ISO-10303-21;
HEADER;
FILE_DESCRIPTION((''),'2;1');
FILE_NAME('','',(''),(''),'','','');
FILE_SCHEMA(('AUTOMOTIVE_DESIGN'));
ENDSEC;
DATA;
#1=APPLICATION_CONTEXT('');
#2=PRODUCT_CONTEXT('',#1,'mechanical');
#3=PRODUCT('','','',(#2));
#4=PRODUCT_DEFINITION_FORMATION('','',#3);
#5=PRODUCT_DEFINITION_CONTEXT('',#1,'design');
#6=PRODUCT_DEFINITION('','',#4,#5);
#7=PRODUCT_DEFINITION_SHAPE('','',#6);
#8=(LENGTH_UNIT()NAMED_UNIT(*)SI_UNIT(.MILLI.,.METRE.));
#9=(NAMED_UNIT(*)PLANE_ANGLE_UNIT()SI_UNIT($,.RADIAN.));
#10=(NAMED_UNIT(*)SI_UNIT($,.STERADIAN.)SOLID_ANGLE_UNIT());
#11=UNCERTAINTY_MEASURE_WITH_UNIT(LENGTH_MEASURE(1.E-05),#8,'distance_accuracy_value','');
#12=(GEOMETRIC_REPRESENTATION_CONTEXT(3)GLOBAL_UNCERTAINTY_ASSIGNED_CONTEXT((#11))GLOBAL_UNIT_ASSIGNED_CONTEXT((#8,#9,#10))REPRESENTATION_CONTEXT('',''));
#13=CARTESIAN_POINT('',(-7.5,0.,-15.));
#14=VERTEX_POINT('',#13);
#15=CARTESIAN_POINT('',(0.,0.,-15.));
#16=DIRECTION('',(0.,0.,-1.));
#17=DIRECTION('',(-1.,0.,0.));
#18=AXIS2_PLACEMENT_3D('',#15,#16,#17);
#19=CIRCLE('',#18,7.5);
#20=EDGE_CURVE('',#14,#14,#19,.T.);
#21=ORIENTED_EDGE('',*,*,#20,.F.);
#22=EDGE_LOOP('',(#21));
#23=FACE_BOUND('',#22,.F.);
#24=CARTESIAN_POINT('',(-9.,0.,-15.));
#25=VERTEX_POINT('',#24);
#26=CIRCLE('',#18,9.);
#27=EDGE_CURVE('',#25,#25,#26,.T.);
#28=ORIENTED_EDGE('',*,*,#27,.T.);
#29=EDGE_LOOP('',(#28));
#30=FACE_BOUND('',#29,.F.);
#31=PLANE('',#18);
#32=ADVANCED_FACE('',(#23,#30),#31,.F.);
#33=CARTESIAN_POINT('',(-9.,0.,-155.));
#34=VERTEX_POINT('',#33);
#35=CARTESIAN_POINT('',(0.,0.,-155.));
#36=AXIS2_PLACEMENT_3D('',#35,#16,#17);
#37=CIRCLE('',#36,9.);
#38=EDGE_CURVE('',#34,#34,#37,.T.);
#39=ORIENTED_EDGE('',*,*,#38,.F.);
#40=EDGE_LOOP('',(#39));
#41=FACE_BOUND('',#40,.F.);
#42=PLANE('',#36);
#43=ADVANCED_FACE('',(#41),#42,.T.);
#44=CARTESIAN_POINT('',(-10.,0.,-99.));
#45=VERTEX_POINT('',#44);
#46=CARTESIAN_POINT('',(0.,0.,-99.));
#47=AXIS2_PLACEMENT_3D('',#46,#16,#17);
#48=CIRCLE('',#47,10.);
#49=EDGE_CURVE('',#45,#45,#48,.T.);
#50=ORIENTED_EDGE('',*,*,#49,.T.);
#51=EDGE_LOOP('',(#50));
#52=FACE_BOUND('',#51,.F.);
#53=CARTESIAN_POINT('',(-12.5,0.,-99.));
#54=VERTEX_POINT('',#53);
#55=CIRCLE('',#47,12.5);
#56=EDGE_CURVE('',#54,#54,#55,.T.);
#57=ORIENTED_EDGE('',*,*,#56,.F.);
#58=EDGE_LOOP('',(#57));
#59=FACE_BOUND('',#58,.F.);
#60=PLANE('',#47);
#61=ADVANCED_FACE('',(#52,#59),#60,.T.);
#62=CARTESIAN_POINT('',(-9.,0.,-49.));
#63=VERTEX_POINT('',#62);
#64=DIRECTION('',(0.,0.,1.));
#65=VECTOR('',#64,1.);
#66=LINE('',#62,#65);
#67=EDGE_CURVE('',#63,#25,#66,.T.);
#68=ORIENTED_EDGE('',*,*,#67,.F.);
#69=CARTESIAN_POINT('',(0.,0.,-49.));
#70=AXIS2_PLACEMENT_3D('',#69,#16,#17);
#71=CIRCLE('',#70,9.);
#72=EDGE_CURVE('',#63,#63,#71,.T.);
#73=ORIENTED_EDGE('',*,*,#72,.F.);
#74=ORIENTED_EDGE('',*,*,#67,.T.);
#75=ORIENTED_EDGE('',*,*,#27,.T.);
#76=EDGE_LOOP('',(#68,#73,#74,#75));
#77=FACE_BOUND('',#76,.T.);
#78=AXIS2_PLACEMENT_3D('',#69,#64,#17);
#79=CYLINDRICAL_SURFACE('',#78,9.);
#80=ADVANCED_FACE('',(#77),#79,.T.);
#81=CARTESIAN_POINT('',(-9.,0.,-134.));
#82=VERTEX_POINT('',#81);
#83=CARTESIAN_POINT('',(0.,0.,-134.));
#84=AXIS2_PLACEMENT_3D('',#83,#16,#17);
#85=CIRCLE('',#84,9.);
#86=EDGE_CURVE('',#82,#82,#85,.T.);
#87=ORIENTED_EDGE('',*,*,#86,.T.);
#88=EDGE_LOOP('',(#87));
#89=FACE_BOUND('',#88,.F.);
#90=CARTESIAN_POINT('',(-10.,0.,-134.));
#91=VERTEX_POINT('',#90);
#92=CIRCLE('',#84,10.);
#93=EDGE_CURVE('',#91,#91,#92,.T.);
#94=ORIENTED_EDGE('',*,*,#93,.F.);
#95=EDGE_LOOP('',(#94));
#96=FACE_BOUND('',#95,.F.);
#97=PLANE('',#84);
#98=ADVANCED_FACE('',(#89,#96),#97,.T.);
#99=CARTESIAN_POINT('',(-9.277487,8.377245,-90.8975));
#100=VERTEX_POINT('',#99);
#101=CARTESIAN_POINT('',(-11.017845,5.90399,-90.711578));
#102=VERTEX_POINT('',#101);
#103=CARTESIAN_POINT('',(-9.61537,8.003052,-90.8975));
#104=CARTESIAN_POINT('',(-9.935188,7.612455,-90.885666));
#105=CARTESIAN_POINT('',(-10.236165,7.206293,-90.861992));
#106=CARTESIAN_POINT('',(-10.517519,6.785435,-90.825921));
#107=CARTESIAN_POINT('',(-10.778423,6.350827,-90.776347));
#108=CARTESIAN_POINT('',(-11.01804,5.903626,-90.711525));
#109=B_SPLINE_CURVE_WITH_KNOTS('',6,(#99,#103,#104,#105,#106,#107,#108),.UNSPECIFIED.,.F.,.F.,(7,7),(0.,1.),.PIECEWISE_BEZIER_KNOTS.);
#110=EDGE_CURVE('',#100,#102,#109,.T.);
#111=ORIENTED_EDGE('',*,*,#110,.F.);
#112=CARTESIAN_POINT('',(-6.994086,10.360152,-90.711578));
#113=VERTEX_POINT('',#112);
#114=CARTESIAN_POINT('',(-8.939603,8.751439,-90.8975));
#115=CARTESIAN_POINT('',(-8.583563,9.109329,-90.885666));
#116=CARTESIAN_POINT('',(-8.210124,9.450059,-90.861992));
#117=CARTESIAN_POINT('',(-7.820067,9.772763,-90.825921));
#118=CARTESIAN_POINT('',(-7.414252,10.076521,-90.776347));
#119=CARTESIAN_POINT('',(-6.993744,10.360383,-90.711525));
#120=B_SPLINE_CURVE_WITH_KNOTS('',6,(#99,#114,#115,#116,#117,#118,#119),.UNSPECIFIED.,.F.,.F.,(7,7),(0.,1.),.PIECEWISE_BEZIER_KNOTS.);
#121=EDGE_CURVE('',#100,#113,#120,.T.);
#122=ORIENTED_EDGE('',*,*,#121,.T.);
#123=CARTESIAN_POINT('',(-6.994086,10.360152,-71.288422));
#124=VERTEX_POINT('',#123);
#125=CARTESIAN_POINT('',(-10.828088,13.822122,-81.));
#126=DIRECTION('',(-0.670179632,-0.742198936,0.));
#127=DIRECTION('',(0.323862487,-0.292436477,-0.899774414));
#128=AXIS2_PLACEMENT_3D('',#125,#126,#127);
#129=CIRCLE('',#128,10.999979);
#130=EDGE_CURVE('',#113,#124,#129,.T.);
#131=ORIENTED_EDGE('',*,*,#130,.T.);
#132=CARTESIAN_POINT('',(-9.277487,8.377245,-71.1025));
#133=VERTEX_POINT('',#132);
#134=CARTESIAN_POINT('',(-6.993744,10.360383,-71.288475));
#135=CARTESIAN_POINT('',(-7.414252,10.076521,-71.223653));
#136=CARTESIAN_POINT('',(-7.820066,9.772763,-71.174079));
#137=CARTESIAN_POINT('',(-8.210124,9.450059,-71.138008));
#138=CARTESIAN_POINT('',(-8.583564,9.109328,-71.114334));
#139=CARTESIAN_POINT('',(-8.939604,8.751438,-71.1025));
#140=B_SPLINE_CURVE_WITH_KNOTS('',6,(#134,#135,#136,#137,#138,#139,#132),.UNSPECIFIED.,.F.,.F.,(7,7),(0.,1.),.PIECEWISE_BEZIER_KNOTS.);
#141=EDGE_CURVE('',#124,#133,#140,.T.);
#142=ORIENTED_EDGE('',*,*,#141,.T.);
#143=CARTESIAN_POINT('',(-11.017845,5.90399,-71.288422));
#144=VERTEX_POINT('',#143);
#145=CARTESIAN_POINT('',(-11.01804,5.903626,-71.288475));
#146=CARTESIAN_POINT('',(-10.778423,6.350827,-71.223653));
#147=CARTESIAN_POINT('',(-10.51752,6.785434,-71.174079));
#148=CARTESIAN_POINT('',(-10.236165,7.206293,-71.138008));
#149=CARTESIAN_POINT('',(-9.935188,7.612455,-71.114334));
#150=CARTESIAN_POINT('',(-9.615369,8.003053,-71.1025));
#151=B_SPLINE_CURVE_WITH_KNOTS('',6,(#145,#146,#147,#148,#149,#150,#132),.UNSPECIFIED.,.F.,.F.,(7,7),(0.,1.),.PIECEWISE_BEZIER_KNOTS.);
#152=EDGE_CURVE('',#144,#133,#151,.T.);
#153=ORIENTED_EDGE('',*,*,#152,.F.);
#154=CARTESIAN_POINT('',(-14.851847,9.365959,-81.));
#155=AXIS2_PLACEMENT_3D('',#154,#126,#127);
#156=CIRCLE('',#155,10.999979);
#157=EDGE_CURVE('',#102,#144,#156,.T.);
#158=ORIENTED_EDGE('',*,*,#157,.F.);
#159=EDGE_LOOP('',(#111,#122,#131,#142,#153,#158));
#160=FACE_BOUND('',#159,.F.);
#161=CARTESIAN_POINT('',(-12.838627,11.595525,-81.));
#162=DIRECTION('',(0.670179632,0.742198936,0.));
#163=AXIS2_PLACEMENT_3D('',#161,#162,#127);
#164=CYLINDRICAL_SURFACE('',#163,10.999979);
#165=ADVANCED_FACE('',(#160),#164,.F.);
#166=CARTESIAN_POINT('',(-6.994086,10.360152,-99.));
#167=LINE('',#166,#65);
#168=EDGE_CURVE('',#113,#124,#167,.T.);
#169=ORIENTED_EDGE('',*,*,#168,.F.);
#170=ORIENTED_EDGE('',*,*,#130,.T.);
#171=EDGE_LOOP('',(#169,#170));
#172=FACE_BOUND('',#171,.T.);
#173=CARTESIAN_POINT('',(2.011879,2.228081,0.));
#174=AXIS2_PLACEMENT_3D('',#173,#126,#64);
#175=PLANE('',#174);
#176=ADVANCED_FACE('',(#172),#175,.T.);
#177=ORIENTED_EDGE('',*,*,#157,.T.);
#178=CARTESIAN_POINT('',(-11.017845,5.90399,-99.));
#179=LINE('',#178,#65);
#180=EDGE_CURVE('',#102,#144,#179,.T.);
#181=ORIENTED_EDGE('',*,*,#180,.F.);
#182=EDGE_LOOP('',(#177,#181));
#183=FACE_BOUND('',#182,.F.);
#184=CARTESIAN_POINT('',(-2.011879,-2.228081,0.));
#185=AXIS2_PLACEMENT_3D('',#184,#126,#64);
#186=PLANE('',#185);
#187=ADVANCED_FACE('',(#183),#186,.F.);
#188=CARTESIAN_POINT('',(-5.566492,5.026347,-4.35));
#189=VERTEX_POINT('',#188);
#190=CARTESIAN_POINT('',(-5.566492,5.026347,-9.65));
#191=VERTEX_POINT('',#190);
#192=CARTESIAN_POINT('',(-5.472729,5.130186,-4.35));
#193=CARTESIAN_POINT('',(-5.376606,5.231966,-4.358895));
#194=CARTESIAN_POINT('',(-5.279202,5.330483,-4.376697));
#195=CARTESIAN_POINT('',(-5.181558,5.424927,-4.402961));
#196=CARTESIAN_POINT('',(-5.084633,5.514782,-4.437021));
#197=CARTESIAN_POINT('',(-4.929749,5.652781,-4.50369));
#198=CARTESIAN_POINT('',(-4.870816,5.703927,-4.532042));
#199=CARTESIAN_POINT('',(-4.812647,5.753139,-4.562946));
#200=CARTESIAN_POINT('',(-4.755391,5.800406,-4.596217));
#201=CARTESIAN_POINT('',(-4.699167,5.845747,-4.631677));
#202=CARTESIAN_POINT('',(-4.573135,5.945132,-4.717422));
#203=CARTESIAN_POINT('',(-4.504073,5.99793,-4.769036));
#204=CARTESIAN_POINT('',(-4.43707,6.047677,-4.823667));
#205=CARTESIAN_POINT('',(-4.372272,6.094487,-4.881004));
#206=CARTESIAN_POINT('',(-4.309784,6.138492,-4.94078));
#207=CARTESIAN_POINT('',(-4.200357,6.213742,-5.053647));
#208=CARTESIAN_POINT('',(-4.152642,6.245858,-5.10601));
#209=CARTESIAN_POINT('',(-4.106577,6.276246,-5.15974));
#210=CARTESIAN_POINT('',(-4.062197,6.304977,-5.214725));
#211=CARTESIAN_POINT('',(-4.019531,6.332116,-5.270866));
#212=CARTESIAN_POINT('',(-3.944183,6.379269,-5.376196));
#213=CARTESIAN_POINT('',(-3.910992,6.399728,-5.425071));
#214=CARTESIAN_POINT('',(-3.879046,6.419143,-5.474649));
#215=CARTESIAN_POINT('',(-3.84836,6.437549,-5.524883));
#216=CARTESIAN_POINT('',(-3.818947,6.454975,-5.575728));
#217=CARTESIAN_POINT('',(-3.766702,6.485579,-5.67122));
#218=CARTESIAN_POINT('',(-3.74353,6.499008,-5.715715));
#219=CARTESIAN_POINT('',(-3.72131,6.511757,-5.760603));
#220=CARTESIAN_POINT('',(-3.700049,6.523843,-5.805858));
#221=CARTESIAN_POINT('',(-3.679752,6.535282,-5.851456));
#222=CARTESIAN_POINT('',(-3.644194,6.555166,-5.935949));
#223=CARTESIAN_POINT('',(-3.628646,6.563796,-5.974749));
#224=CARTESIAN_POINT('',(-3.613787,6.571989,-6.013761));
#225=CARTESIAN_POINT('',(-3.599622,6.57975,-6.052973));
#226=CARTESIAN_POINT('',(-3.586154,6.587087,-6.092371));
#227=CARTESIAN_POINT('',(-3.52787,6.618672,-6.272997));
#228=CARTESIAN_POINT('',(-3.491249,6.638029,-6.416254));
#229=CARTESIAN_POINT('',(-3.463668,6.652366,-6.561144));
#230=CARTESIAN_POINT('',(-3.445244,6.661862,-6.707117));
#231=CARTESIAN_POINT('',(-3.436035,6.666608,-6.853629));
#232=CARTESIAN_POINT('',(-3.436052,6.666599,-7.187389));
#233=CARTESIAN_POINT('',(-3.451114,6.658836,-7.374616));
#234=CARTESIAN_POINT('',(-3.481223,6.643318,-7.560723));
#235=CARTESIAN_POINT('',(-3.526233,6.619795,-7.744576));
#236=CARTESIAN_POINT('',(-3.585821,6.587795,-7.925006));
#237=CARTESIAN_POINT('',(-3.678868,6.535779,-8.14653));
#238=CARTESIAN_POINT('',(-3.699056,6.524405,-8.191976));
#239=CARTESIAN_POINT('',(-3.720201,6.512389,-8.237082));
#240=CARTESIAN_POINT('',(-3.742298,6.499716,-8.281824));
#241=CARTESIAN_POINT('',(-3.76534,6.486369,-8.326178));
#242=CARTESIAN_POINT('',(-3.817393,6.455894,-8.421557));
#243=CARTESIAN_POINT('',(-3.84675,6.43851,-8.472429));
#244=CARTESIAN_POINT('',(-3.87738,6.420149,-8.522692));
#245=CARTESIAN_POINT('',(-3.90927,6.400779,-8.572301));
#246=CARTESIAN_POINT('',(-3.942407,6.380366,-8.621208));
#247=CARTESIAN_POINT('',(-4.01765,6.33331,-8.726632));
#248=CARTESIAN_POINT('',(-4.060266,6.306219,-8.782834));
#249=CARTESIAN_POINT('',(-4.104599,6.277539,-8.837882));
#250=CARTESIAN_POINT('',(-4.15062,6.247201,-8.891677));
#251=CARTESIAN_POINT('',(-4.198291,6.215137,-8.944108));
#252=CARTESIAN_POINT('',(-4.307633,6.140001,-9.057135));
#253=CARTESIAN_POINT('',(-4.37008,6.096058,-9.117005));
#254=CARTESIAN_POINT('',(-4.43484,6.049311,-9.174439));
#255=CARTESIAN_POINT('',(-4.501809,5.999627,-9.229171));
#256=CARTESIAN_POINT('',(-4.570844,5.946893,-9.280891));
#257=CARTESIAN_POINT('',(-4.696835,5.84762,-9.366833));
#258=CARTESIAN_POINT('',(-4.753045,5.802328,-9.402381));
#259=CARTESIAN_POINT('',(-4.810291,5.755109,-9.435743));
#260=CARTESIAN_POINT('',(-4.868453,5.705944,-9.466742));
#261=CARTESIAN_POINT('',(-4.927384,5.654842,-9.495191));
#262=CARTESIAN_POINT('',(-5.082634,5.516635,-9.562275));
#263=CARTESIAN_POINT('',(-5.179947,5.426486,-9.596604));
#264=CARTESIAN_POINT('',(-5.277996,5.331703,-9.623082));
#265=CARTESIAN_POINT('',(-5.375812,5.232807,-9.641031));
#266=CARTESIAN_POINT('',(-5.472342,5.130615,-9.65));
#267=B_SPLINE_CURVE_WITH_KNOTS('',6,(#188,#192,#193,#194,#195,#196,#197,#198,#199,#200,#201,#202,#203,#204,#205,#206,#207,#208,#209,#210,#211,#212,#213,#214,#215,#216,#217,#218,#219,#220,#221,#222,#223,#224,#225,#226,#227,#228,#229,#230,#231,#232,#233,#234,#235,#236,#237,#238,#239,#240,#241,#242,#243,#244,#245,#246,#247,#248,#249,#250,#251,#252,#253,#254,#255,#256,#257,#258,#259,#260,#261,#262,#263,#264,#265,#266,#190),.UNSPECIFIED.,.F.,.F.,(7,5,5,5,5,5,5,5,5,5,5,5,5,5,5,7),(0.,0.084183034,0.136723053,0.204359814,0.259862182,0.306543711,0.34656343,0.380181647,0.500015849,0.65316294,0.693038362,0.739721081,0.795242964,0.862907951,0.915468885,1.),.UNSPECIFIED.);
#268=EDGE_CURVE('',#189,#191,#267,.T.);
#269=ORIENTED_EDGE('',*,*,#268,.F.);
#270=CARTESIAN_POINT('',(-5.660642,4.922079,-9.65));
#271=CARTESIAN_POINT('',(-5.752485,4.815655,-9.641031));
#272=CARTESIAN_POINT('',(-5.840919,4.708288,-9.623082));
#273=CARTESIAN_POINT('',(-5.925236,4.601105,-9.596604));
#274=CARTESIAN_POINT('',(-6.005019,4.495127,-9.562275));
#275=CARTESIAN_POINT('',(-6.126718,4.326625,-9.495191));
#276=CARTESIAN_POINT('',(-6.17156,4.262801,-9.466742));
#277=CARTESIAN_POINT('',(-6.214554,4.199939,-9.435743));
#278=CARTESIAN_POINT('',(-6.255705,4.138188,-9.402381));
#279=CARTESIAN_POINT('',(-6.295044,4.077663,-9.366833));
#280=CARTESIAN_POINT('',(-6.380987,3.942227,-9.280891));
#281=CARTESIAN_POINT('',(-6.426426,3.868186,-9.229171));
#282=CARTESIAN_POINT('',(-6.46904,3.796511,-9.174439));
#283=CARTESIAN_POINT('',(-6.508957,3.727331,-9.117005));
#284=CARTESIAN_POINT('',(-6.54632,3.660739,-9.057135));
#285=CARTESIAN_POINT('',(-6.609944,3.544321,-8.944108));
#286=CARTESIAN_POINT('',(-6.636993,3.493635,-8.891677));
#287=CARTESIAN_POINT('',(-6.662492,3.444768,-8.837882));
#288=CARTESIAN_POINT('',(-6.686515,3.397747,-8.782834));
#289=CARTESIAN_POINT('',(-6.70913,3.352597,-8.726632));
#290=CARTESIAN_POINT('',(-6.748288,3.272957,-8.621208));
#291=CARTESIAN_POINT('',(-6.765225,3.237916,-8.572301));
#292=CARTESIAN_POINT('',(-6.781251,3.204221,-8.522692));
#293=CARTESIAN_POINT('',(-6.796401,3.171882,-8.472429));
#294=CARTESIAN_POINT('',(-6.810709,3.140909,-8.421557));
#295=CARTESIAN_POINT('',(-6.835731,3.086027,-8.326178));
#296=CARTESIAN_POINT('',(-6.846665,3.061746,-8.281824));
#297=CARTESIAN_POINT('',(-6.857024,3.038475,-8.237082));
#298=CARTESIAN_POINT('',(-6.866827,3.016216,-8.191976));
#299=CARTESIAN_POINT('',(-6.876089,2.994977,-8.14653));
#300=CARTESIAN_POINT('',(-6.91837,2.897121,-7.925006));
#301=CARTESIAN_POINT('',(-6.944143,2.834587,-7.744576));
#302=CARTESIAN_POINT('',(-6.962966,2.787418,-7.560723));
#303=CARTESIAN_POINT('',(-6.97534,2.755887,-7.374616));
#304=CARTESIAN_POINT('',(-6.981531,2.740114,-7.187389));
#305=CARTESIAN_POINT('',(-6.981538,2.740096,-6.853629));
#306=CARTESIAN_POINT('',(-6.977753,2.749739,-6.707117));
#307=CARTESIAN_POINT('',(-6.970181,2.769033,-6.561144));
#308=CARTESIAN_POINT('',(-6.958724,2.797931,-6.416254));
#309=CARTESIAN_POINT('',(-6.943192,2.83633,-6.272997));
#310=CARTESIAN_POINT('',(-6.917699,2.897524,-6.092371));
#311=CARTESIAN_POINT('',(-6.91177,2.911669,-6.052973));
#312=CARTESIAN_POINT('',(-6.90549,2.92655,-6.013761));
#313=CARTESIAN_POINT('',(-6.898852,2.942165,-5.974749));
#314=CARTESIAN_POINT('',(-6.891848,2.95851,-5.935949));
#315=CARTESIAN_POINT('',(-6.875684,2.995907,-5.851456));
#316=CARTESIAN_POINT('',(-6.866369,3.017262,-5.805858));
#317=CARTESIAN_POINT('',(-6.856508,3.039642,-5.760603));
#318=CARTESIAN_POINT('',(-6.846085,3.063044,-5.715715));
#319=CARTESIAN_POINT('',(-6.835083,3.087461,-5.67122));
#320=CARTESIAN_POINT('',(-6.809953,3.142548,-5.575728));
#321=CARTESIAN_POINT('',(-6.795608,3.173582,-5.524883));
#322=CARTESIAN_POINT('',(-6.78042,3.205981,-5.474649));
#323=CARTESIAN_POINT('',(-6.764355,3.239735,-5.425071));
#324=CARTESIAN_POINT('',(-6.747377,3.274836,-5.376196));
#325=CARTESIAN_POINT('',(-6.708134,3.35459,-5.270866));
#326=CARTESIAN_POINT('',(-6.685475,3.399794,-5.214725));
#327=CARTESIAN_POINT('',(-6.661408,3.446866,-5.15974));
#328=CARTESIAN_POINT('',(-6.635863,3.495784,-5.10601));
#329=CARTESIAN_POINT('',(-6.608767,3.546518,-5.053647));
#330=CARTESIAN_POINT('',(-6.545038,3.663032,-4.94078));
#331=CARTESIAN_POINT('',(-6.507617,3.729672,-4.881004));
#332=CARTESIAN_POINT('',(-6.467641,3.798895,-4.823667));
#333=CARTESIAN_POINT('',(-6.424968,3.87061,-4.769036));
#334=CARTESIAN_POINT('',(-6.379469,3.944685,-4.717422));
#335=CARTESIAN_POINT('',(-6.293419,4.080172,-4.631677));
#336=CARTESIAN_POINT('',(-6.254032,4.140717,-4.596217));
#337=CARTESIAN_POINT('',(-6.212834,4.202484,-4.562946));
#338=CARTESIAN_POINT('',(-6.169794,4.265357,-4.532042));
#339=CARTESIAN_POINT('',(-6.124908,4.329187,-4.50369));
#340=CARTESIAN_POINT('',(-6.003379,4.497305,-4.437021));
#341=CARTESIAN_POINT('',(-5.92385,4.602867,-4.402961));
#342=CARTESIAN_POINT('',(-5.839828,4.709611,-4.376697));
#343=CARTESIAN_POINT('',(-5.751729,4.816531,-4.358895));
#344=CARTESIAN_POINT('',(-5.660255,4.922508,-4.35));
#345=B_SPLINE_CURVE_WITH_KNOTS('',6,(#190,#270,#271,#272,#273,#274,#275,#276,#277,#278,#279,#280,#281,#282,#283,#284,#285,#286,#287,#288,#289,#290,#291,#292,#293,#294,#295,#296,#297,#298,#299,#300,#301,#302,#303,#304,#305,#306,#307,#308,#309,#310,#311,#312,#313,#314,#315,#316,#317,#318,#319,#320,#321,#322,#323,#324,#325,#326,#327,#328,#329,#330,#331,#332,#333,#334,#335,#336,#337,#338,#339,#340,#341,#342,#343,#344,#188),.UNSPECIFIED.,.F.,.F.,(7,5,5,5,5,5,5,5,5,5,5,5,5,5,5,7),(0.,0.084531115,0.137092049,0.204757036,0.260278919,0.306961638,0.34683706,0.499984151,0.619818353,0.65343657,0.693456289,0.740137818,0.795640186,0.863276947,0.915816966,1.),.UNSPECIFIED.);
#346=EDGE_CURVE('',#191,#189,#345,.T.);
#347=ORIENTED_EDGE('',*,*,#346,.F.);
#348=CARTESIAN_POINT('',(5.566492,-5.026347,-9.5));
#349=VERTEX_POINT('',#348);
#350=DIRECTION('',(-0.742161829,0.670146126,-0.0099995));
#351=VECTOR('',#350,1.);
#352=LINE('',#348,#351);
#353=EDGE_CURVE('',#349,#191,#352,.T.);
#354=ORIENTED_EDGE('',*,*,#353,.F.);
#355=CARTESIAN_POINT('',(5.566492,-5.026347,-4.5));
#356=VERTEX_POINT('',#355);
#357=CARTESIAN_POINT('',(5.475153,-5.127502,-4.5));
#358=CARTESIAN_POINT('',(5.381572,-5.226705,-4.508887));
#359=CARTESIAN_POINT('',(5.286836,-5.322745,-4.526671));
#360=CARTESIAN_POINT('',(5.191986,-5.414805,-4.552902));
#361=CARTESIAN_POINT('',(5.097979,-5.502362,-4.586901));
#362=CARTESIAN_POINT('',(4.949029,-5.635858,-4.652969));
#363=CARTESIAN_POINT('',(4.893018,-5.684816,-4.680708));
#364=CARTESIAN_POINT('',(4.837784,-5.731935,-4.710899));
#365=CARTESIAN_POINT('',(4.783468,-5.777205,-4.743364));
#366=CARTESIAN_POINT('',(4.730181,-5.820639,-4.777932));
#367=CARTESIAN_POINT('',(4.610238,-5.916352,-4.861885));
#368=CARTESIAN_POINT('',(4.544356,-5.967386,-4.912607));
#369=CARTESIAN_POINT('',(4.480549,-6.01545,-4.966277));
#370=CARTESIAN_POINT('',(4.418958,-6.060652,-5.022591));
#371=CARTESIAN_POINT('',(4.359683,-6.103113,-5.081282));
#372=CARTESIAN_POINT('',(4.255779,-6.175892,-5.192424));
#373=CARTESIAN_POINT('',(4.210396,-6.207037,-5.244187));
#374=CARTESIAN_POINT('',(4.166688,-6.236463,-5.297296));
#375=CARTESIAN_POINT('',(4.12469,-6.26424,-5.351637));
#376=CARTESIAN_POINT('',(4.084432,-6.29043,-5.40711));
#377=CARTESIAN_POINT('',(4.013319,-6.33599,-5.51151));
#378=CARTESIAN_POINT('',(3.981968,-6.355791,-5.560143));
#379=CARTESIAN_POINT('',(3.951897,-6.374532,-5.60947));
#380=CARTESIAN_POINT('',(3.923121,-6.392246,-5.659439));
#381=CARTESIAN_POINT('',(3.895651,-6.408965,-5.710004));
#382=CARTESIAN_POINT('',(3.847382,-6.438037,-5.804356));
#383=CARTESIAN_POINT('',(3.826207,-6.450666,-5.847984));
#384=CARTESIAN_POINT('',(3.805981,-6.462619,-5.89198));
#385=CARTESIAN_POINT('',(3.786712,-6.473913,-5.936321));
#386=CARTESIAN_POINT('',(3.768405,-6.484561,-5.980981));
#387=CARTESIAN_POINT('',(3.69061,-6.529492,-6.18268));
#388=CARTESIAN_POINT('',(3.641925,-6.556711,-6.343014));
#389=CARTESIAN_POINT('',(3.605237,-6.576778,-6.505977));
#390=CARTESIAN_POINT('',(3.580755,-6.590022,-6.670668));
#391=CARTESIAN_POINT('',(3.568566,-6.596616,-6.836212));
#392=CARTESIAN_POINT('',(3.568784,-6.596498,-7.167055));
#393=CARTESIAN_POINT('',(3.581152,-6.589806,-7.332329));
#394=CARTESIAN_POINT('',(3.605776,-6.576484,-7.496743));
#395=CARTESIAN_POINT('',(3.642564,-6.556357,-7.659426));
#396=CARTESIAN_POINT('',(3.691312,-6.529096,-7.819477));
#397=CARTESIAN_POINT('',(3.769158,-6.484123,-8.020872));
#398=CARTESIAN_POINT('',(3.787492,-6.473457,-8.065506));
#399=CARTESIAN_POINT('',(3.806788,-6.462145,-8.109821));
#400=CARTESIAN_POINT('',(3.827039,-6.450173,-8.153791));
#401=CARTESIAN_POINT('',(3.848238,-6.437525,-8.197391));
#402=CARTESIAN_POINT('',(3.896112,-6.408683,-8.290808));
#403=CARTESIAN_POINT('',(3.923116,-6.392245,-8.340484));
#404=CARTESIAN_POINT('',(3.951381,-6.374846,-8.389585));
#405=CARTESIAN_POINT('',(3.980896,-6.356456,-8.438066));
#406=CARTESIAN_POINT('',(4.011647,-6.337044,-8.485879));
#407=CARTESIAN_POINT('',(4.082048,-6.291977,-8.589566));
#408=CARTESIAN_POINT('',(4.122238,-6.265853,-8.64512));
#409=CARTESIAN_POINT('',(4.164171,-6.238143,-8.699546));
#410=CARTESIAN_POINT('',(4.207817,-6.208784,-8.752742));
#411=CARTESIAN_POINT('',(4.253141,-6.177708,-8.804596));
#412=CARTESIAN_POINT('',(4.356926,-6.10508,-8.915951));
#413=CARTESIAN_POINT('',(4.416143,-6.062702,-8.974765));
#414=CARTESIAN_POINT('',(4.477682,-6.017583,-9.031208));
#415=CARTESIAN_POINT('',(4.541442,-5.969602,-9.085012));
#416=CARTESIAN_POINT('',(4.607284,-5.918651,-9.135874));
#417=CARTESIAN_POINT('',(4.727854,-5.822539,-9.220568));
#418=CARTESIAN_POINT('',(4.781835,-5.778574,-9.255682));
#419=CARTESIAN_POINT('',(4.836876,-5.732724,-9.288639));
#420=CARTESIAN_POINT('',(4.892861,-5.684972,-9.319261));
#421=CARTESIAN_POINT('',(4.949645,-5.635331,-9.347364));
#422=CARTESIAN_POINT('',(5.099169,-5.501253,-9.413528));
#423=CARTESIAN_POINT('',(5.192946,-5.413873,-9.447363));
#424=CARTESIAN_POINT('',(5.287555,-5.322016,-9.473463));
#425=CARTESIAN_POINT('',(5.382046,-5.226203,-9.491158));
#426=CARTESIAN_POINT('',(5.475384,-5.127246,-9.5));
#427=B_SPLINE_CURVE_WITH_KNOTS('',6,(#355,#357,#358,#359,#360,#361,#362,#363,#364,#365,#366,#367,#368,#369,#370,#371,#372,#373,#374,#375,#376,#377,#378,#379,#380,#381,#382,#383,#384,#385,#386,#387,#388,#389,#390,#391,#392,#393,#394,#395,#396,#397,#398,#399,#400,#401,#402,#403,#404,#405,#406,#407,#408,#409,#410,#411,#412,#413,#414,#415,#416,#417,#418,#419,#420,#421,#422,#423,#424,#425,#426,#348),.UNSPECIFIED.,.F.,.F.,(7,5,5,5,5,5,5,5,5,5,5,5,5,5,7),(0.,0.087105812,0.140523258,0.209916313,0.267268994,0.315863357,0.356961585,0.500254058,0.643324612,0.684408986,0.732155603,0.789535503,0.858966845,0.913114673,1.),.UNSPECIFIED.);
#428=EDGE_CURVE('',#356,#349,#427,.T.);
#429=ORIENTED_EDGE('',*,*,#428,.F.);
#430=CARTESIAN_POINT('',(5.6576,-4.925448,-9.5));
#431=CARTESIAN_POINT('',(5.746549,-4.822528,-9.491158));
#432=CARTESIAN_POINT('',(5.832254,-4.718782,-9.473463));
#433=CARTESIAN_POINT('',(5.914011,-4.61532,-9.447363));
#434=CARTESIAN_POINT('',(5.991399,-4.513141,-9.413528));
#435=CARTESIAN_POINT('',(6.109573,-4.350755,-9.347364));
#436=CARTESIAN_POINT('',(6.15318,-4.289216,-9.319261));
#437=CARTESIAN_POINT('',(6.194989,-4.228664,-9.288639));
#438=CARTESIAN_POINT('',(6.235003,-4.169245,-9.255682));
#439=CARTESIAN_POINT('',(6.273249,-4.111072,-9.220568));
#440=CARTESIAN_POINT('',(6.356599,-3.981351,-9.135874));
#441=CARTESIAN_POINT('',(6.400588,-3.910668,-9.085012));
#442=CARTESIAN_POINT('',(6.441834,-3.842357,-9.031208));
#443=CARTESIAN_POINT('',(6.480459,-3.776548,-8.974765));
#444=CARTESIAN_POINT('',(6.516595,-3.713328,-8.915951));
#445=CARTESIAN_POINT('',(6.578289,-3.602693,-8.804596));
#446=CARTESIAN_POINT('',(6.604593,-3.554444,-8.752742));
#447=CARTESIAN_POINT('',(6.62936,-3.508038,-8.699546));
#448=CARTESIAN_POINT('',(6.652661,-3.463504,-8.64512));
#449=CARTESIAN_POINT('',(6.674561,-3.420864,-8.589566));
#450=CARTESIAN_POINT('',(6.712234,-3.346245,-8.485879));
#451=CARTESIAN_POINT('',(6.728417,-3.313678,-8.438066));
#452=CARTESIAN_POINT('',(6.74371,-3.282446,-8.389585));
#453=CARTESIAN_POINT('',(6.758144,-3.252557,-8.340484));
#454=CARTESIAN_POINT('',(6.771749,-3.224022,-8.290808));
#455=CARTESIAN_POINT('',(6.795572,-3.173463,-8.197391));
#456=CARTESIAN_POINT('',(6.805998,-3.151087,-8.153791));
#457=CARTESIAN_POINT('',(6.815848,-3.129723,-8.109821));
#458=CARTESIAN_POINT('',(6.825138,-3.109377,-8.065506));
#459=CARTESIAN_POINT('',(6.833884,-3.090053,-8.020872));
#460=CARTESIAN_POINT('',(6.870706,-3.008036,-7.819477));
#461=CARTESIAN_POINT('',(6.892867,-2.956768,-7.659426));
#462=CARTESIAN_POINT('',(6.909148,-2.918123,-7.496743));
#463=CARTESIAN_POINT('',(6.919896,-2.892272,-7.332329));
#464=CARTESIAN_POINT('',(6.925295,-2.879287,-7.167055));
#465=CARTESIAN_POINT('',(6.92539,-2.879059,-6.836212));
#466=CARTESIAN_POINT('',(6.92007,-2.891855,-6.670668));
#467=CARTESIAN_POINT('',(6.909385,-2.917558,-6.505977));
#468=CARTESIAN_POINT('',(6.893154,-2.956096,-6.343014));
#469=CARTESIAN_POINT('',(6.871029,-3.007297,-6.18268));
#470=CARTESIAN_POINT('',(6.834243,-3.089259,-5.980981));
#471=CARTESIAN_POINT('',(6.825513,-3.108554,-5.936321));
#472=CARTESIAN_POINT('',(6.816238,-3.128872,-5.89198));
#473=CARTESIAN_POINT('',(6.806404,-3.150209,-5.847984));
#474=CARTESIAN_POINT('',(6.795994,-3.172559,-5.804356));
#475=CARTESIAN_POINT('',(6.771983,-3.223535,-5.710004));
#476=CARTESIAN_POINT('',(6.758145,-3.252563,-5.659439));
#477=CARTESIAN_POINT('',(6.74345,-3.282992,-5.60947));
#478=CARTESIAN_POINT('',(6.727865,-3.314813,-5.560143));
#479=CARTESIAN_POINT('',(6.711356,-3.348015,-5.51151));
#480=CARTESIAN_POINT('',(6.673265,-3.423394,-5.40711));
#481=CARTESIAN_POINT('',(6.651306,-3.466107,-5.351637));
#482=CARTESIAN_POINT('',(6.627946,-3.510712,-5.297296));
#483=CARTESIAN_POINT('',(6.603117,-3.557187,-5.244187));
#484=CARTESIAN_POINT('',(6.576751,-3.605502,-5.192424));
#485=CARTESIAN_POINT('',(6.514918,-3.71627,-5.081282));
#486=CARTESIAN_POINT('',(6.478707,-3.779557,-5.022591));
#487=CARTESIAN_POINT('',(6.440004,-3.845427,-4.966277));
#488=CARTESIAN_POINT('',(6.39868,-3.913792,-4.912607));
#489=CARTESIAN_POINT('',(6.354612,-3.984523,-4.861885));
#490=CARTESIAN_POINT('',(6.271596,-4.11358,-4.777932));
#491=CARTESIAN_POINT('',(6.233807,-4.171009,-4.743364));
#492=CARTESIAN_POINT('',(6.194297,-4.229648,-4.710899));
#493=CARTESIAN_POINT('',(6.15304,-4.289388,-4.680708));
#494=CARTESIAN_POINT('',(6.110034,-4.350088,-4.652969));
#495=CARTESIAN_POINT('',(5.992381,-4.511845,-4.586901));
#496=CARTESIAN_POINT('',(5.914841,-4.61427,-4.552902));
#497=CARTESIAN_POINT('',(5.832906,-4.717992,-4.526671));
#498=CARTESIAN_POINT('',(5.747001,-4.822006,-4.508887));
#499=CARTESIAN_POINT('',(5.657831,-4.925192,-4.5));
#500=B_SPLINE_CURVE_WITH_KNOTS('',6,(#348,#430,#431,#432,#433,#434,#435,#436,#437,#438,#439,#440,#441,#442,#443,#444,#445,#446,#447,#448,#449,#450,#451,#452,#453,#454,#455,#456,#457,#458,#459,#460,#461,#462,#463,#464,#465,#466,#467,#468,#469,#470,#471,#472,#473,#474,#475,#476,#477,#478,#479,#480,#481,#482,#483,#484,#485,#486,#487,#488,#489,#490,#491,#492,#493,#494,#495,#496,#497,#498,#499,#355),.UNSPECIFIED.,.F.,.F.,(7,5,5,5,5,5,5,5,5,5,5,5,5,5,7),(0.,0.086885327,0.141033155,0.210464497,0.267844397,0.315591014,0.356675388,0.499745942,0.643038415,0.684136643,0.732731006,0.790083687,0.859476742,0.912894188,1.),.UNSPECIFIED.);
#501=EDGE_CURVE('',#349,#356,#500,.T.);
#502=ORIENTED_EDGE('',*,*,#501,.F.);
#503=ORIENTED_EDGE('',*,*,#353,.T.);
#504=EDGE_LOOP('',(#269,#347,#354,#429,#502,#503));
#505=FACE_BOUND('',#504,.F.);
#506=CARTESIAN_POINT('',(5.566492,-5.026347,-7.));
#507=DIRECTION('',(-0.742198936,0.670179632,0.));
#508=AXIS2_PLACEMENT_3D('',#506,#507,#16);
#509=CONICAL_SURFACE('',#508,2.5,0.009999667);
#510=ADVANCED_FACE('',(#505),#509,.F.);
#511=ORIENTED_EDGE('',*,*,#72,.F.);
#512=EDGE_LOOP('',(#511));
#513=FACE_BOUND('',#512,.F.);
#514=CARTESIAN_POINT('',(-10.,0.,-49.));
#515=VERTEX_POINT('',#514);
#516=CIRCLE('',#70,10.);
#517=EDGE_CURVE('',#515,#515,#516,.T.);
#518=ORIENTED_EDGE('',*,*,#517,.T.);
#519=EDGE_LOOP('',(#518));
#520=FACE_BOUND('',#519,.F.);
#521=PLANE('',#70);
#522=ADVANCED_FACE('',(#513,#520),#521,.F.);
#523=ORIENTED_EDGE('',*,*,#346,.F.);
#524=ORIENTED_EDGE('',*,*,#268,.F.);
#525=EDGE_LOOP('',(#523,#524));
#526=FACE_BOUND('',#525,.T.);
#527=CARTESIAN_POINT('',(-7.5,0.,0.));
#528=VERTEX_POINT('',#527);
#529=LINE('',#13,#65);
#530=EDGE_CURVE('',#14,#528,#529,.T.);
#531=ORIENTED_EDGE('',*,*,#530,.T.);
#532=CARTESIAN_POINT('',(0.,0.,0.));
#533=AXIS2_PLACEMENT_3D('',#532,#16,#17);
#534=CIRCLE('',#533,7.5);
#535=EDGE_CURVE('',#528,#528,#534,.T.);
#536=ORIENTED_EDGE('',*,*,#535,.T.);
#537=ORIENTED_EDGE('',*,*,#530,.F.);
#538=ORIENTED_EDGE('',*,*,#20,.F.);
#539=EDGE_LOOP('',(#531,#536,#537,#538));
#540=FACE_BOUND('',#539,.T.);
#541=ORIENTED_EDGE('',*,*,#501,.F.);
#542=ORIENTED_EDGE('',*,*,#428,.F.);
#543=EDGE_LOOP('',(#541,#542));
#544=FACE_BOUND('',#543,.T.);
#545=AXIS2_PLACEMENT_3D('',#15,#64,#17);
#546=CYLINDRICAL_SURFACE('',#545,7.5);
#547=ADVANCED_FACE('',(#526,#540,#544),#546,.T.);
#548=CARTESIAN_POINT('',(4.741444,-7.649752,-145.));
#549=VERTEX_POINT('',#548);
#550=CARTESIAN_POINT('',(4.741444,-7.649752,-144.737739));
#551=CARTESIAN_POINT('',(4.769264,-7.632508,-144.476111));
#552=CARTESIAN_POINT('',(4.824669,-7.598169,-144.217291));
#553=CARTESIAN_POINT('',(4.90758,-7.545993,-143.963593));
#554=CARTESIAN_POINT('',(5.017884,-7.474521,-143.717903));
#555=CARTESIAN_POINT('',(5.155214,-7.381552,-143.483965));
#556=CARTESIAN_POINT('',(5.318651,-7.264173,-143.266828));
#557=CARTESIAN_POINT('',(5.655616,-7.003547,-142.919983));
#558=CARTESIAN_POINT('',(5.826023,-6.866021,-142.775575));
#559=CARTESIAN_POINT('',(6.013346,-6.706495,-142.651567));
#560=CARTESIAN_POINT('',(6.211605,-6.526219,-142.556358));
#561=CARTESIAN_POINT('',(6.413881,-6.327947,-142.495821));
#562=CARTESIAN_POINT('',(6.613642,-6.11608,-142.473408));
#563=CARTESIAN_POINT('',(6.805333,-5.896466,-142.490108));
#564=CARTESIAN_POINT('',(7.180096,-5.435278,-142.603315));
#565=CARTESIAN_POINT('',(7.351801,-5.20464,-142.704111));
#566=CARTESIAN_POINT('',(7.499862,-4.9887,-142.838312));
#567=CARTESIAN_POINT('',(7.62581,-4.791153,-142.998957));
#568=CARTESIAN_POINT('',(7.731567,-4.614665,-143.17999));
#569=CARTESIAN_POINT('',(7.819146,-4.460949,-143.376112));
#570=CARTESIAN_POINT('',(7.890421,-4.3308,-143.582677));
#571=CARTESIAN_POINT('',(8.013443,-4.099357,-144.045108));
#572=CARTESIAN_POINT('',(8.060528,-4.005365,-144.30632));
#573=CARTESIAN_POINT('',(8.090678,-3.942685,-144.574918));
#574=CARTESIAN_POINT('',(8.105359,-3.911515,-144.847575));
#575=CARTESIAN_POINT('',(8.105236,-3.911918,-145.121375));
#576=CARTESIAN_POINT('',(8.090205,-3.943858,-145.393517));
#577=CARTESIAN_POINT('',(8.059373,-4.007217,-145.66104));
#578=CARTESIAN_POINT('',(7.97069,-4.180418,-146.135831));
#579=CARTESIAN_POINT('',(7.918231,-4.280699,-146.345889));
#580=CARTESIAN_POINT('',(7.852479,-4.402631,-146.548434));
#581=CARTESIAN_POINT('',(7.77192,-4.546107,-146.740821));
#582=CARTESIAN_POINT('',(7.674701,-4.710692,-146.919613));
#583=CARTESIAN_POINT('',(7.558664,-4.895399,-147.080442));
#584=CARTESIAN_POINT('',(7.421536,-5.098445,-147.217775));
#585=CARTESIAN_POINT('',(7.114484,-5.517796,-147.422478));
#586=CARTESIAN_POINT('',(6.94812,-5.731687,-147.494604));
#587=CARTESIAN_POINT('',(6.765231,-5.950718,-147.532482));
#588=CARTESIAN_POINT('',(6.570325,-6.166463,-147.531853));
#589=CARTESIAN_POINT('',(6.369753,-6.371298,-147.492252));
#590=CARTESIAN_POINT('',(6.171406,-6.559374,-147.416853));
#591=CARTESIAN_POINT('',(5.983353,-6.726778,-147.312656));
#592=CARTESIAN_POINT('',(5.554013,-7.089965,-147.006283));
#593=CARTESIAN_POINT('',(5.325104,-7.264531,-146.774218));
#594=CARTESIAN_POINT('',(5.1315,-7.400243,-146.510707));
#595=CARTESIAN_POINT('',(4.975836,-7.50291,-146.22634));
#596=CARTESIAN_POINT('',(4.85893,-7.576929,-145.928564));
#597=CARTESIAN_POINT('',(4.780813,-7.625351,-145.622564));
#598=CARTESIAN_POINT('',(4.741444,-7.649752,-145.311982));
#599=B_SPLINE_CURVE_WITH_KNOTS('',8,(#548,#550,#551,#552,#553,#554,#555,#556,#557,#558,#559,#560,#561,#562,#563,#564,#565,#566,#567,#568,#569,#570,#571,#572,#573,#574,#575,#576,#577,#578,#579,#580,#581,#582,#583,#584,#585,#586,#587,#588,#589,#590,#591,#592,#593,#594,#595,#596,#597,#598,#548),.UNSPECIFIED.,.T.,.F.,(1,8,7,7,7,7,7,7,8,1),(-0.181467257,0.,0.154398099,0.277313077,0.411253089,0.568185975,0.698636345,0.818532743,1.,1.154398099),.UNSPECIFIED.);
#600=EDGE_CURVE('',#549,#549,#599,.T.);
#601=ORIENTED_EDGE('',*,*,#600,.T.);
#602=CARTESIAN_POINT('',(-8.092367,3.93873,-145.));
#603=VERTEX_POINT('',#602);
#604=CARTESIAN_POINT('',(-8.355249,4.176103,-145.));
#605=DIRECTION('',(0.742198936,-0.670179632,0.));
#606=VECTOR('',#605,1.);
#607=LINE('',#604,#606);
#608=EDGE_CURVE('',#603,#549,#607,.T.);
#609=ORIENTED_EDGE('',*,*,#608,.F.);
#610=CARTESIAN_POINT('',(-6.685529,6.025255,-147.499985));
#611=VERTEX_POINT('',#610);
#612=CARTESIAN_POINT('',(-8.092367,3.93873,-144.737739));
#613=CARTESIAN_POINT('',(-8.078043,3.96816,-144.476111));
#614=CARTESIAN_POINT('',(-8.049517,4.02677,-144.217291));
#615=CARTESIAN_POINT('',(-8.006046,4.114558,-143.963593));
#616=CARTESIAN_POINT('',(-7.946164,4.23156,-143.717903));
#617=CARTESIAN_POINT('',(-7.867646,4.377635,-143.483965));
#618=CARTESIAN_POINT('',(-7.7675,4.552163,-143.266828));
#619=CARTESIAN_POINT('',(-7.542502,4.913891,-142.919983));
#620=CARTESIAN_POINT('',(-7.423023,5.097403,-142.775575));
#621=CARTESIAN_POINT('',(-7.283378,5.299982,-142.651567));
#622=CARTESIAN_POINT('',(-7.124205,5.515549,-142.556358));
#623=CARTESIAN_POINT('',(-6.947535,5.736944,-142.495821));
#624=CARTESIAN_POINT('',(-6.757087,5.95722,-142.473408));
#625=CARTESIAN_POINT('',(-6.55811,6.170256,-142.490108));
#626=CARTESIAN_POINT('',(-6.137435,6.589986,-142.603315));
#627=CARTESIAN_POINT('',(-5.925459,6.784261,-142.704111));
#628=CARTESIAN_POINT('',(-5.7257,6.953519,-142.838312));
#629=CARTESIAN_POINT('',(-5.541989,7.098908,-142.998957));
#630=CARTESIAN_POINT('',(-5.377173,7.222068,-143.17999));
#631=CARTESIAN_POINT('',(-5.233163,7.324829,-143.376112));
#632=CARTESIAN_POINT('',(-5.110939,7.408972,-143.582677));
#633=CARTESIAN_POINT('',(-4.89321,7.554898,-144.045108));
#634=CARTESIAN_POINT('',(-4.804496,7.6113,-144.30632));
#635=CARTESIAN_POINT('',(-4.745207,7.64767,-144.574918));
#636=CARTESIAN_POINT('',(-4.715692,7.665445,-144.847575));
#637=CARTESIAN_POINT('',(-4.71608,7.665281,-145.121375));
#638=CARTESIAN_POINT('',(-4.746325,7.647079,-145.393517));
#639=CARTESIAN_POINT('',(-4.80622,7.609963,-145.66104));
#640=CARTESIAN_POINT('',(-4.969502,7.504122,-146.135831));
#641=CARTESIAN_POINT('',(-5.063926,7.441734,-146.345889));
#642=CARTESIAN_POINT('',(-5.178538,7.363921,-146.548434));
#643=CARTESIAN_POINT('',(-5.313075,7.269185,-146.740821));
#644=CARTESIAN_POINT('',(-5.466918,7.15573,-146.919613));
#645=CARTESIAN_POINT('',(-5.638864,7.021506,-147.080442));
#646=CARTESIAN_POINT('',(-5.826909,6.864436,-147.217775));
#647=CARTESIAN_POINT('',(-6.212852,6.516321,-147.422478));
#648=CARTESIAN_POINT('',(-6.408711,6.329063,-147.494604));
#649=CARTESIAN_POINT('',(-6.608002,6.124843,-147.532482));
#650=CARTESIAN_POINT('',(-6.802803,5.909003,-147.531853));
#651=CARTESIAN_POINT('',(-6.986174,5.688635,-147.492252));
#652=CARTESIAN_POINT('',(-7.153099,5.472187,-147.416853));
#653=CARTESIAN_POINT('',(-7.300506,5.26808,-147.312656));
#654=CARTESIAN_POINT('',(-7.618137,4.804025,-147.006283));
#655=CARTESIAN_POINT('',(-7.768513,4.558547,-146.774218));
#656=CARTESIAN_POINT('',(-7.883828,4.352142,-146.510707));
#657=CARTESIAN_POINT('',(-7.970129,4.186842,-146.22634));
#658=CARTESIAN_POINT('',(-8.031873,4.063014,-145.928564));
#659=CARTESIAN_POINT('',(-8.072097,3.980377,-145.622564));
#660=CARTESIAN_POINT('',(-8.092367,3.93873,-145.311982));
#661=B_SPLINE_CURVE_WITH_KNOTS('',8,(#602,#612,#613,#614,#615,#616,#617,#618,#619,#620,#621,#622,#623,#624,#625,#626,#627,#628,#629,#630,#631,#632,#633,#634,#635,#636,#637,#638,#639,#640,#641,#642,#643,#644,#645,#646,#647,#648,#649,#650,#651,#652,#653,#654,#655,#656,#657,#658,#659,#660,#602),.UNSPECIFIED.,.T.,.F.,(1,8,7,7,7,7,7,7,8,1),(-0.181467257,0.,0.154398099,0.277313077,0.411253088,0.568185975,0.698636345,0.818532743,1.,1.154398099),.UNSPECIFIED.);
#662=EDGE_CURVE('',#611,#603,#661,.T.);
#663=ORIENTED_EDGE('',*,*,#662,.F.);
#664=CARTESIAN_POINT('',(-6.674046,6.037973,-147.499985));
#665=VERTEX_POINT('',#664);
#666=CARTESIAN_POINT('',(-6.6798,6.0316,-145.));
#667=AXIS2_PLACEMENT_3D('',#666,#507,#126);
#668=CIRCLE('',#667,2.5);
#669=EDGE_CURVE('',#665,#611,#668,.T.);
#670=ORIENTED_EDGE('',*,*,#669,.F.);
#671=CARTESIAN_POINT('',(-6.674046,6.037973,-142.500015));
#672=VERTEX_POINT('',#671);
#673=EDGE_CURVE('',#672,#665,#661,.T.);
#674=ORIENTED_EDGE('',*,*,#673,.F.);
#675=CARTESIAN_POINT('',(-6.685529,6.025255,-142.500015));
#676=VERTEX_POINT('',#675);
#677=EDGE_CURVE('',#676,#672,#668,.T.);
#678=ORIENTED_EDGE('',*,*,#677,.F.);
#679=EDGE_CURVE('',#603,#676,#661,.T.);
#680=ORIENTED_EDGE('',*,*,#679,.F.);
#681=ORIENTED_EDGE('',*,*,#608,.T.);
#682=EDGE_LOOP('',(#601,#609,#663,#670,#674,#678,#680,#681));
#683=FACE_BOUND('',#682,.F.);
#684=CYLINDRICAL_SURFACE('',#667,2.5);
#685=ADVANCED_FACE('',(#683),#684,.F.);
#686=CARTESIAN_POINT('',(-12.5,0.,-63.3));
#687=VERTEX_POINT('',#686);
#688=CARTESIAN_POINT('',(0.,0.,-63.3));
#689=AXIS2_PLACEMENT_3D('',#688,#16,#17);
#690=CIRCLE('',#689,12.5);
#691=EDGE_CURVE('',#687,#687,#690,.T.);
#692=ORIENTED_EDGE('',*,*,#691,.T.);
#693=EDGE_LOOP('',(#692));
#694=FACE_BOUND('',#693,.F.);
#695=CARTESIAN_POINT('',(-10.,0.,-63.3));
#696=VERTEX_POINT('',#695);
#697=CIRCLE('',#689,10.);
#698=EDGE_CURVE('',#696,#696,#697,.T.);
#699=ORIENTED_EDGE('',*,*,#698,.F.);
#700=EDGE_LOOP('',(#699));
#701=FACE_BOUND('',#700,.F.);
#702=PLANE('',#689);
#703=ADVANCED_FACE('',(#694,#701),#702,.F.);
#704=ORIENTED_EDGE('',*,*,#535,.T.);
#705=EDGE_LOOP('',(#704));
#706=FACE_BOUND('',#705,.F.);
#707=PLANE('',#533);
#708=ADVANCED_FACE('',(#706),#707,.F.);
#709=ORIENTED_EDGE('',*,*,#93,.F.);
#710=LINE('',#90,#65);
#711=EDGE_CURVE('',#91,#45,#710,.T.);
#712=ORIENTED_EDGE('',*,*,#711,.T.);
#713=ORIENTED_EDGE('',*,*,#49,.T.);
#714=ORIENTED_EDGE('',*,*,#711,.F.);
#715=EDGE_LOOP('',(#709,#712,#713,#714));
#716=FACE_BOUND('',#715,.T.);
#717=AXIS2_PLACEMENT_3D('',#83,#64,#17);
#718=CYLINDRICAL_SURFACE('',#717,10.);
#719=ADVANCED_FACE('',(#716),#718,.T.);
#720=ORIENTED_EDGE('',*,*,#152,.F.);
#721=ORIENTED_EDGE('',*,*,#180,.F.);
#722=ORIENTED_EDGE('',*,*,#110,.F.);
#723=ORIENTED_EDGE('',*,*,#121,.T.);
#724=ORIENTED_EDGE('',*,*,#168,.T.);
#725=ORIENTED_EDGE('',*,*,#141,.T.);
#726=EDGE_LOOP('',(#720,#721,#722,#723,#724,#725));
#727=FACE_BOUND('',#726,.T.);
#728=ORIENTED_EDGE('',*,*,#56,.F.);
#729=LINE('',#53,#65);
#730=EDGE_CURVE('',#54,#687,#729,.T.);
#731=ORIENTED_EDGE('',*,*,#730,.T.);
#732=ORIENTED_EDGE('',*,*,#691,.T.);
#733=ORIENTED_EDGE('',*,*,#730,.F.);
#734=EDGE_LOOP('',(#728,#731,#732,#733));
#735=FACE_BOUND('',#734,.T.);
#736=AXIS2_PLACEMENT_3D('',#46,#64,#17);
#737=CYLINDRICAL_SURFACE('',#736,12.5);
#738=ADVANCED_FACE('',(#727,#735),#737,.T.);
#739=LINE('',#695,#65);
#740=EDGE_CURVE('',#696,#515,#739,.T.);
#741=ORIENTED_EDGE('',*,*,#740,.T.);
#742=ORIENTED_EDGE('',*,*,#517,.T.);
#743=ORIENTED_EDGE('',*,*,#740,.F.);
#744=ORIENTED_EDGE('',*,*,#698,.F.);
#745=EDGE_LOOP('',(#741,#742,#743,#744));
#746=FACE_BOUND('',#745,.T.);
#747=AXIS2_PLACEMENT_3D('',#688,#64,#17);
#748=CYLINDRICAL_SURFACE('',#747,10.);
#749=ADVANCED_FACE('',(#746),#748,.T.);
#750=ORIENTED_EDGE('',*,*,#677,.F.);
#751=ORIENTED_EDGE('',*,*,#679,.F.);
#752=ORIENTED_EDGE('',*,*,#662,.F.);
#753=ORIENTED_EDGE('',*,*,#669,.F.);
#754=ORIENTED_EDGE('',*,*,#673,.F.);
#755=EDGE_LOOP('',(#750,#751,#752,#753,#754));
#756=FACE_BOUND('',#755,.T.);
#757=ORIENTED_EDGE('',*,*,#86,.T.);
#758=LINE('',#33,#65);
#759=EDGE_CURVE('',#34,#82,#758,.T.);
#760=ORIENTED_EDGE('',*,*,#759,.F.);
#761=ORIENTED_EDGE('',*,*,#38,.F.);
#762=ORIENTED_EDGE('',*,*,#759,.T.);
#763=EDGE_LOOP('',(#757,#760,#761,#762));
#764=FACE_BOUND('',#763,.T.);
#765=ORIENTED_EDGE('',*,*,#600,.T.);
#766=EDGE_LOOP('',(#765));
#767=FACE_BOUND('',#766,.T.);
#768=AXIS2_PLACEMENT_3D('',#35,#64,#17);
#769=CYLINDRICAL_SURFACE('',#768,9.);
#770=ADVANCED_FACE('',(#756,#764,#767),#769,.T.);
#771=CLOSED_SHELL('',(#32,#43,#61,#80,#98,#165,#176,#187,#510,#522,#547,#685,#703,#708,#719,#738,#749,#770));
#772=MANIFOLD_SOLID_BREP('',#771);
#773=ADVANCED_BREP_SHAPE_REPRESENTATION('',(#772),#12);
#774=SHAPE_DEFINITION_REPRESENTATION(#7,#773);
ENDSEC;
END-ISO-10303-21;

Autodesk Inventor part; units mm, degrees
ref_plane "YZ Plane" through (0, 0, 0) normal (1, 0, 0) x (0, 1, 0)
ref_plane "XZ Plane" through (0, 0, 0) normal (0, 1, 0) x (-1, 0, 0)
sketch "Sketch1" plane through (0, 0, 0) normal (0, 1, 0) x (-1, 0, 0)
  line L0 (0, 0) -> (0, -155)
  line L1 (0, -155) -> (9, -155)
  line L2 (9, -155) -> (9, -134)
  line L3 (9, -134) -> (10, -134)
  line L4 (10, -134) -> (10, -99)
  line L5 (10, -99) -> (12.5, -99)
  line L6 (12.5, -99) -> (12.5, -63.3)
  line L7 (12.5, -63.3) -> (10, -63.3)
  line L8 (10, -63.3) -> (10, -49)
  line L9 (10, -49) -> (9, -49)
  line L10 (9, -49) -> (9, -15)
  line L11 (9, -15) -> (7.5, -15)
  line L12 (7.5, -15) -> (7.5, 0)
  line L13 (7.5, 0) -> (0, 0)
  dimension "d1" = 155
  dimension "d2" = 9
  dimension "d3" = 21
  dimension "d4" = 1
  dimension "d5" = 35
  dimension "d6" = 2.5
  dimension "d7" = 35.7
  dimension "d8" = 2.5
  dimension "d9" = 14.3
  dimension "d10" = 1
  dimension "d11" = 34
  dimension "d12" = 1.5
  dimension "d13" = 15
revolve "Revolution1" add sketch "Sketch1" angle 360 about axis through (0, 0, 0) along (0, 0, -1)
sketch "Sketch2" plane through (0, 0, -155) normal (0, 0, -1) x (-1, 0, 0)
  circle A0 centre (0, 0) radius 9 projected
  circle A1 centre (0, 0) radius 7.5 projected
  point P0 (6.6798, 6.0316)
ref_plane "Work Plane1" through (-6.6798, 6.0316, -155) normal (-0.7421989, 0.6701796, 0) x (-0.6701796, -0.7421989, 0)
sketch "Sketch3" plane through (-6.6798, 6.0316, -155) normal (-0.7421989, 0.6701796, 0) x (-0.6701796, -0.7421989, 0)
  line L0 (-9, 0) -> (9, 0) projected
  circle A0 centre (0, 10) radius 2.5
  point P0 (0, 155)
  dimension "d17" = 5
  dimension "d18" = 10
extrude "Extrusion1" cut sketch "Sketch3" against normal through all
ref_plane "Work Plane2" through (0, 0, 0) normal (-0.6701796, -0.7421989, 0) x (0, 0, 1)
sketch "Sketch4" plane through (0, 0, 0) normal (-0.6701796, -0.7421989, 0) x (0, 0, 1)
  line L0 (-99, 12.5) -> (-99, -12.5) projected
  line L1 (-57, 0) -> (-57, 17.3) construction
  line L2 (-81, 17.2999) -> (-81, -8.0858) construction
  line L3 (-57, 17.3) -> (-99, 17.3) construction
  arc A0 (-90.8975, 12.5) -> (-71.1025, 12.5) centre (-81, 17.2999) ccw
  line L4 (-63.3, 12.5) -> (-99, 12.5) projected
  point P0 (0, 0)
  dimension "d22" = 17.3
  dimension "d24" = 18
  dimension "d25" = 24
  dimension "d27" = 11
  dimension "d28" = 19.795
extrude "Extrusion2" cut sketch "Sketch4" along normal mid plane 6
sketch "Sketch5" plane through (0, 0, 0) normal (-0.6701796, -0.7421989, 0) x (0, 0, 1)
  line L0 (-15, 9) -> (-15, -9) projected
  line L1 (-15, 9) -> (-7, 9) construction
  line L2 (-15, 9) -> (-49, 9) construction
  line L3 (-7, 9) -> (-7, 7.5) construction
  line L4 (0, 7.5) -> (-15, 7.5) construction
  line L5 (-7, 7.5) -> (-9.65, 7.5) construction
  line L6 (-7, 7.5) -> (-7, -7.5) construction
  line L7 (0, -7.5) -> (-15, -7.5) construction
  line L8 (-7, -7.5) -> (-9.5, -7.5) construction
  line L9 (-9.5, -7.5) -> (-9.65, 7.5) construction
  line L10 (-7, 7.5) -> (-9.65, 7.5)
  line L11 (-9.5, -7.5) -> (-7, -7.5)
  line L12 (-7, 7.5) -> (-7, -7.5)
  line L13 (-9.5, -7.5) -> (-9.65, 7.5)
  point P0 (0, 0)
  dimension "d31" = 8
  dimension "d41" = 2.65
  dimension "d42" = 2.5
revolve "Revolution2" cut sketch "Sketch5" angle 360 about axis through (-5.5665, 5.0263, -7) along (0.7421989, -0.6701796, 0)
properties part number "laborator2 final"
